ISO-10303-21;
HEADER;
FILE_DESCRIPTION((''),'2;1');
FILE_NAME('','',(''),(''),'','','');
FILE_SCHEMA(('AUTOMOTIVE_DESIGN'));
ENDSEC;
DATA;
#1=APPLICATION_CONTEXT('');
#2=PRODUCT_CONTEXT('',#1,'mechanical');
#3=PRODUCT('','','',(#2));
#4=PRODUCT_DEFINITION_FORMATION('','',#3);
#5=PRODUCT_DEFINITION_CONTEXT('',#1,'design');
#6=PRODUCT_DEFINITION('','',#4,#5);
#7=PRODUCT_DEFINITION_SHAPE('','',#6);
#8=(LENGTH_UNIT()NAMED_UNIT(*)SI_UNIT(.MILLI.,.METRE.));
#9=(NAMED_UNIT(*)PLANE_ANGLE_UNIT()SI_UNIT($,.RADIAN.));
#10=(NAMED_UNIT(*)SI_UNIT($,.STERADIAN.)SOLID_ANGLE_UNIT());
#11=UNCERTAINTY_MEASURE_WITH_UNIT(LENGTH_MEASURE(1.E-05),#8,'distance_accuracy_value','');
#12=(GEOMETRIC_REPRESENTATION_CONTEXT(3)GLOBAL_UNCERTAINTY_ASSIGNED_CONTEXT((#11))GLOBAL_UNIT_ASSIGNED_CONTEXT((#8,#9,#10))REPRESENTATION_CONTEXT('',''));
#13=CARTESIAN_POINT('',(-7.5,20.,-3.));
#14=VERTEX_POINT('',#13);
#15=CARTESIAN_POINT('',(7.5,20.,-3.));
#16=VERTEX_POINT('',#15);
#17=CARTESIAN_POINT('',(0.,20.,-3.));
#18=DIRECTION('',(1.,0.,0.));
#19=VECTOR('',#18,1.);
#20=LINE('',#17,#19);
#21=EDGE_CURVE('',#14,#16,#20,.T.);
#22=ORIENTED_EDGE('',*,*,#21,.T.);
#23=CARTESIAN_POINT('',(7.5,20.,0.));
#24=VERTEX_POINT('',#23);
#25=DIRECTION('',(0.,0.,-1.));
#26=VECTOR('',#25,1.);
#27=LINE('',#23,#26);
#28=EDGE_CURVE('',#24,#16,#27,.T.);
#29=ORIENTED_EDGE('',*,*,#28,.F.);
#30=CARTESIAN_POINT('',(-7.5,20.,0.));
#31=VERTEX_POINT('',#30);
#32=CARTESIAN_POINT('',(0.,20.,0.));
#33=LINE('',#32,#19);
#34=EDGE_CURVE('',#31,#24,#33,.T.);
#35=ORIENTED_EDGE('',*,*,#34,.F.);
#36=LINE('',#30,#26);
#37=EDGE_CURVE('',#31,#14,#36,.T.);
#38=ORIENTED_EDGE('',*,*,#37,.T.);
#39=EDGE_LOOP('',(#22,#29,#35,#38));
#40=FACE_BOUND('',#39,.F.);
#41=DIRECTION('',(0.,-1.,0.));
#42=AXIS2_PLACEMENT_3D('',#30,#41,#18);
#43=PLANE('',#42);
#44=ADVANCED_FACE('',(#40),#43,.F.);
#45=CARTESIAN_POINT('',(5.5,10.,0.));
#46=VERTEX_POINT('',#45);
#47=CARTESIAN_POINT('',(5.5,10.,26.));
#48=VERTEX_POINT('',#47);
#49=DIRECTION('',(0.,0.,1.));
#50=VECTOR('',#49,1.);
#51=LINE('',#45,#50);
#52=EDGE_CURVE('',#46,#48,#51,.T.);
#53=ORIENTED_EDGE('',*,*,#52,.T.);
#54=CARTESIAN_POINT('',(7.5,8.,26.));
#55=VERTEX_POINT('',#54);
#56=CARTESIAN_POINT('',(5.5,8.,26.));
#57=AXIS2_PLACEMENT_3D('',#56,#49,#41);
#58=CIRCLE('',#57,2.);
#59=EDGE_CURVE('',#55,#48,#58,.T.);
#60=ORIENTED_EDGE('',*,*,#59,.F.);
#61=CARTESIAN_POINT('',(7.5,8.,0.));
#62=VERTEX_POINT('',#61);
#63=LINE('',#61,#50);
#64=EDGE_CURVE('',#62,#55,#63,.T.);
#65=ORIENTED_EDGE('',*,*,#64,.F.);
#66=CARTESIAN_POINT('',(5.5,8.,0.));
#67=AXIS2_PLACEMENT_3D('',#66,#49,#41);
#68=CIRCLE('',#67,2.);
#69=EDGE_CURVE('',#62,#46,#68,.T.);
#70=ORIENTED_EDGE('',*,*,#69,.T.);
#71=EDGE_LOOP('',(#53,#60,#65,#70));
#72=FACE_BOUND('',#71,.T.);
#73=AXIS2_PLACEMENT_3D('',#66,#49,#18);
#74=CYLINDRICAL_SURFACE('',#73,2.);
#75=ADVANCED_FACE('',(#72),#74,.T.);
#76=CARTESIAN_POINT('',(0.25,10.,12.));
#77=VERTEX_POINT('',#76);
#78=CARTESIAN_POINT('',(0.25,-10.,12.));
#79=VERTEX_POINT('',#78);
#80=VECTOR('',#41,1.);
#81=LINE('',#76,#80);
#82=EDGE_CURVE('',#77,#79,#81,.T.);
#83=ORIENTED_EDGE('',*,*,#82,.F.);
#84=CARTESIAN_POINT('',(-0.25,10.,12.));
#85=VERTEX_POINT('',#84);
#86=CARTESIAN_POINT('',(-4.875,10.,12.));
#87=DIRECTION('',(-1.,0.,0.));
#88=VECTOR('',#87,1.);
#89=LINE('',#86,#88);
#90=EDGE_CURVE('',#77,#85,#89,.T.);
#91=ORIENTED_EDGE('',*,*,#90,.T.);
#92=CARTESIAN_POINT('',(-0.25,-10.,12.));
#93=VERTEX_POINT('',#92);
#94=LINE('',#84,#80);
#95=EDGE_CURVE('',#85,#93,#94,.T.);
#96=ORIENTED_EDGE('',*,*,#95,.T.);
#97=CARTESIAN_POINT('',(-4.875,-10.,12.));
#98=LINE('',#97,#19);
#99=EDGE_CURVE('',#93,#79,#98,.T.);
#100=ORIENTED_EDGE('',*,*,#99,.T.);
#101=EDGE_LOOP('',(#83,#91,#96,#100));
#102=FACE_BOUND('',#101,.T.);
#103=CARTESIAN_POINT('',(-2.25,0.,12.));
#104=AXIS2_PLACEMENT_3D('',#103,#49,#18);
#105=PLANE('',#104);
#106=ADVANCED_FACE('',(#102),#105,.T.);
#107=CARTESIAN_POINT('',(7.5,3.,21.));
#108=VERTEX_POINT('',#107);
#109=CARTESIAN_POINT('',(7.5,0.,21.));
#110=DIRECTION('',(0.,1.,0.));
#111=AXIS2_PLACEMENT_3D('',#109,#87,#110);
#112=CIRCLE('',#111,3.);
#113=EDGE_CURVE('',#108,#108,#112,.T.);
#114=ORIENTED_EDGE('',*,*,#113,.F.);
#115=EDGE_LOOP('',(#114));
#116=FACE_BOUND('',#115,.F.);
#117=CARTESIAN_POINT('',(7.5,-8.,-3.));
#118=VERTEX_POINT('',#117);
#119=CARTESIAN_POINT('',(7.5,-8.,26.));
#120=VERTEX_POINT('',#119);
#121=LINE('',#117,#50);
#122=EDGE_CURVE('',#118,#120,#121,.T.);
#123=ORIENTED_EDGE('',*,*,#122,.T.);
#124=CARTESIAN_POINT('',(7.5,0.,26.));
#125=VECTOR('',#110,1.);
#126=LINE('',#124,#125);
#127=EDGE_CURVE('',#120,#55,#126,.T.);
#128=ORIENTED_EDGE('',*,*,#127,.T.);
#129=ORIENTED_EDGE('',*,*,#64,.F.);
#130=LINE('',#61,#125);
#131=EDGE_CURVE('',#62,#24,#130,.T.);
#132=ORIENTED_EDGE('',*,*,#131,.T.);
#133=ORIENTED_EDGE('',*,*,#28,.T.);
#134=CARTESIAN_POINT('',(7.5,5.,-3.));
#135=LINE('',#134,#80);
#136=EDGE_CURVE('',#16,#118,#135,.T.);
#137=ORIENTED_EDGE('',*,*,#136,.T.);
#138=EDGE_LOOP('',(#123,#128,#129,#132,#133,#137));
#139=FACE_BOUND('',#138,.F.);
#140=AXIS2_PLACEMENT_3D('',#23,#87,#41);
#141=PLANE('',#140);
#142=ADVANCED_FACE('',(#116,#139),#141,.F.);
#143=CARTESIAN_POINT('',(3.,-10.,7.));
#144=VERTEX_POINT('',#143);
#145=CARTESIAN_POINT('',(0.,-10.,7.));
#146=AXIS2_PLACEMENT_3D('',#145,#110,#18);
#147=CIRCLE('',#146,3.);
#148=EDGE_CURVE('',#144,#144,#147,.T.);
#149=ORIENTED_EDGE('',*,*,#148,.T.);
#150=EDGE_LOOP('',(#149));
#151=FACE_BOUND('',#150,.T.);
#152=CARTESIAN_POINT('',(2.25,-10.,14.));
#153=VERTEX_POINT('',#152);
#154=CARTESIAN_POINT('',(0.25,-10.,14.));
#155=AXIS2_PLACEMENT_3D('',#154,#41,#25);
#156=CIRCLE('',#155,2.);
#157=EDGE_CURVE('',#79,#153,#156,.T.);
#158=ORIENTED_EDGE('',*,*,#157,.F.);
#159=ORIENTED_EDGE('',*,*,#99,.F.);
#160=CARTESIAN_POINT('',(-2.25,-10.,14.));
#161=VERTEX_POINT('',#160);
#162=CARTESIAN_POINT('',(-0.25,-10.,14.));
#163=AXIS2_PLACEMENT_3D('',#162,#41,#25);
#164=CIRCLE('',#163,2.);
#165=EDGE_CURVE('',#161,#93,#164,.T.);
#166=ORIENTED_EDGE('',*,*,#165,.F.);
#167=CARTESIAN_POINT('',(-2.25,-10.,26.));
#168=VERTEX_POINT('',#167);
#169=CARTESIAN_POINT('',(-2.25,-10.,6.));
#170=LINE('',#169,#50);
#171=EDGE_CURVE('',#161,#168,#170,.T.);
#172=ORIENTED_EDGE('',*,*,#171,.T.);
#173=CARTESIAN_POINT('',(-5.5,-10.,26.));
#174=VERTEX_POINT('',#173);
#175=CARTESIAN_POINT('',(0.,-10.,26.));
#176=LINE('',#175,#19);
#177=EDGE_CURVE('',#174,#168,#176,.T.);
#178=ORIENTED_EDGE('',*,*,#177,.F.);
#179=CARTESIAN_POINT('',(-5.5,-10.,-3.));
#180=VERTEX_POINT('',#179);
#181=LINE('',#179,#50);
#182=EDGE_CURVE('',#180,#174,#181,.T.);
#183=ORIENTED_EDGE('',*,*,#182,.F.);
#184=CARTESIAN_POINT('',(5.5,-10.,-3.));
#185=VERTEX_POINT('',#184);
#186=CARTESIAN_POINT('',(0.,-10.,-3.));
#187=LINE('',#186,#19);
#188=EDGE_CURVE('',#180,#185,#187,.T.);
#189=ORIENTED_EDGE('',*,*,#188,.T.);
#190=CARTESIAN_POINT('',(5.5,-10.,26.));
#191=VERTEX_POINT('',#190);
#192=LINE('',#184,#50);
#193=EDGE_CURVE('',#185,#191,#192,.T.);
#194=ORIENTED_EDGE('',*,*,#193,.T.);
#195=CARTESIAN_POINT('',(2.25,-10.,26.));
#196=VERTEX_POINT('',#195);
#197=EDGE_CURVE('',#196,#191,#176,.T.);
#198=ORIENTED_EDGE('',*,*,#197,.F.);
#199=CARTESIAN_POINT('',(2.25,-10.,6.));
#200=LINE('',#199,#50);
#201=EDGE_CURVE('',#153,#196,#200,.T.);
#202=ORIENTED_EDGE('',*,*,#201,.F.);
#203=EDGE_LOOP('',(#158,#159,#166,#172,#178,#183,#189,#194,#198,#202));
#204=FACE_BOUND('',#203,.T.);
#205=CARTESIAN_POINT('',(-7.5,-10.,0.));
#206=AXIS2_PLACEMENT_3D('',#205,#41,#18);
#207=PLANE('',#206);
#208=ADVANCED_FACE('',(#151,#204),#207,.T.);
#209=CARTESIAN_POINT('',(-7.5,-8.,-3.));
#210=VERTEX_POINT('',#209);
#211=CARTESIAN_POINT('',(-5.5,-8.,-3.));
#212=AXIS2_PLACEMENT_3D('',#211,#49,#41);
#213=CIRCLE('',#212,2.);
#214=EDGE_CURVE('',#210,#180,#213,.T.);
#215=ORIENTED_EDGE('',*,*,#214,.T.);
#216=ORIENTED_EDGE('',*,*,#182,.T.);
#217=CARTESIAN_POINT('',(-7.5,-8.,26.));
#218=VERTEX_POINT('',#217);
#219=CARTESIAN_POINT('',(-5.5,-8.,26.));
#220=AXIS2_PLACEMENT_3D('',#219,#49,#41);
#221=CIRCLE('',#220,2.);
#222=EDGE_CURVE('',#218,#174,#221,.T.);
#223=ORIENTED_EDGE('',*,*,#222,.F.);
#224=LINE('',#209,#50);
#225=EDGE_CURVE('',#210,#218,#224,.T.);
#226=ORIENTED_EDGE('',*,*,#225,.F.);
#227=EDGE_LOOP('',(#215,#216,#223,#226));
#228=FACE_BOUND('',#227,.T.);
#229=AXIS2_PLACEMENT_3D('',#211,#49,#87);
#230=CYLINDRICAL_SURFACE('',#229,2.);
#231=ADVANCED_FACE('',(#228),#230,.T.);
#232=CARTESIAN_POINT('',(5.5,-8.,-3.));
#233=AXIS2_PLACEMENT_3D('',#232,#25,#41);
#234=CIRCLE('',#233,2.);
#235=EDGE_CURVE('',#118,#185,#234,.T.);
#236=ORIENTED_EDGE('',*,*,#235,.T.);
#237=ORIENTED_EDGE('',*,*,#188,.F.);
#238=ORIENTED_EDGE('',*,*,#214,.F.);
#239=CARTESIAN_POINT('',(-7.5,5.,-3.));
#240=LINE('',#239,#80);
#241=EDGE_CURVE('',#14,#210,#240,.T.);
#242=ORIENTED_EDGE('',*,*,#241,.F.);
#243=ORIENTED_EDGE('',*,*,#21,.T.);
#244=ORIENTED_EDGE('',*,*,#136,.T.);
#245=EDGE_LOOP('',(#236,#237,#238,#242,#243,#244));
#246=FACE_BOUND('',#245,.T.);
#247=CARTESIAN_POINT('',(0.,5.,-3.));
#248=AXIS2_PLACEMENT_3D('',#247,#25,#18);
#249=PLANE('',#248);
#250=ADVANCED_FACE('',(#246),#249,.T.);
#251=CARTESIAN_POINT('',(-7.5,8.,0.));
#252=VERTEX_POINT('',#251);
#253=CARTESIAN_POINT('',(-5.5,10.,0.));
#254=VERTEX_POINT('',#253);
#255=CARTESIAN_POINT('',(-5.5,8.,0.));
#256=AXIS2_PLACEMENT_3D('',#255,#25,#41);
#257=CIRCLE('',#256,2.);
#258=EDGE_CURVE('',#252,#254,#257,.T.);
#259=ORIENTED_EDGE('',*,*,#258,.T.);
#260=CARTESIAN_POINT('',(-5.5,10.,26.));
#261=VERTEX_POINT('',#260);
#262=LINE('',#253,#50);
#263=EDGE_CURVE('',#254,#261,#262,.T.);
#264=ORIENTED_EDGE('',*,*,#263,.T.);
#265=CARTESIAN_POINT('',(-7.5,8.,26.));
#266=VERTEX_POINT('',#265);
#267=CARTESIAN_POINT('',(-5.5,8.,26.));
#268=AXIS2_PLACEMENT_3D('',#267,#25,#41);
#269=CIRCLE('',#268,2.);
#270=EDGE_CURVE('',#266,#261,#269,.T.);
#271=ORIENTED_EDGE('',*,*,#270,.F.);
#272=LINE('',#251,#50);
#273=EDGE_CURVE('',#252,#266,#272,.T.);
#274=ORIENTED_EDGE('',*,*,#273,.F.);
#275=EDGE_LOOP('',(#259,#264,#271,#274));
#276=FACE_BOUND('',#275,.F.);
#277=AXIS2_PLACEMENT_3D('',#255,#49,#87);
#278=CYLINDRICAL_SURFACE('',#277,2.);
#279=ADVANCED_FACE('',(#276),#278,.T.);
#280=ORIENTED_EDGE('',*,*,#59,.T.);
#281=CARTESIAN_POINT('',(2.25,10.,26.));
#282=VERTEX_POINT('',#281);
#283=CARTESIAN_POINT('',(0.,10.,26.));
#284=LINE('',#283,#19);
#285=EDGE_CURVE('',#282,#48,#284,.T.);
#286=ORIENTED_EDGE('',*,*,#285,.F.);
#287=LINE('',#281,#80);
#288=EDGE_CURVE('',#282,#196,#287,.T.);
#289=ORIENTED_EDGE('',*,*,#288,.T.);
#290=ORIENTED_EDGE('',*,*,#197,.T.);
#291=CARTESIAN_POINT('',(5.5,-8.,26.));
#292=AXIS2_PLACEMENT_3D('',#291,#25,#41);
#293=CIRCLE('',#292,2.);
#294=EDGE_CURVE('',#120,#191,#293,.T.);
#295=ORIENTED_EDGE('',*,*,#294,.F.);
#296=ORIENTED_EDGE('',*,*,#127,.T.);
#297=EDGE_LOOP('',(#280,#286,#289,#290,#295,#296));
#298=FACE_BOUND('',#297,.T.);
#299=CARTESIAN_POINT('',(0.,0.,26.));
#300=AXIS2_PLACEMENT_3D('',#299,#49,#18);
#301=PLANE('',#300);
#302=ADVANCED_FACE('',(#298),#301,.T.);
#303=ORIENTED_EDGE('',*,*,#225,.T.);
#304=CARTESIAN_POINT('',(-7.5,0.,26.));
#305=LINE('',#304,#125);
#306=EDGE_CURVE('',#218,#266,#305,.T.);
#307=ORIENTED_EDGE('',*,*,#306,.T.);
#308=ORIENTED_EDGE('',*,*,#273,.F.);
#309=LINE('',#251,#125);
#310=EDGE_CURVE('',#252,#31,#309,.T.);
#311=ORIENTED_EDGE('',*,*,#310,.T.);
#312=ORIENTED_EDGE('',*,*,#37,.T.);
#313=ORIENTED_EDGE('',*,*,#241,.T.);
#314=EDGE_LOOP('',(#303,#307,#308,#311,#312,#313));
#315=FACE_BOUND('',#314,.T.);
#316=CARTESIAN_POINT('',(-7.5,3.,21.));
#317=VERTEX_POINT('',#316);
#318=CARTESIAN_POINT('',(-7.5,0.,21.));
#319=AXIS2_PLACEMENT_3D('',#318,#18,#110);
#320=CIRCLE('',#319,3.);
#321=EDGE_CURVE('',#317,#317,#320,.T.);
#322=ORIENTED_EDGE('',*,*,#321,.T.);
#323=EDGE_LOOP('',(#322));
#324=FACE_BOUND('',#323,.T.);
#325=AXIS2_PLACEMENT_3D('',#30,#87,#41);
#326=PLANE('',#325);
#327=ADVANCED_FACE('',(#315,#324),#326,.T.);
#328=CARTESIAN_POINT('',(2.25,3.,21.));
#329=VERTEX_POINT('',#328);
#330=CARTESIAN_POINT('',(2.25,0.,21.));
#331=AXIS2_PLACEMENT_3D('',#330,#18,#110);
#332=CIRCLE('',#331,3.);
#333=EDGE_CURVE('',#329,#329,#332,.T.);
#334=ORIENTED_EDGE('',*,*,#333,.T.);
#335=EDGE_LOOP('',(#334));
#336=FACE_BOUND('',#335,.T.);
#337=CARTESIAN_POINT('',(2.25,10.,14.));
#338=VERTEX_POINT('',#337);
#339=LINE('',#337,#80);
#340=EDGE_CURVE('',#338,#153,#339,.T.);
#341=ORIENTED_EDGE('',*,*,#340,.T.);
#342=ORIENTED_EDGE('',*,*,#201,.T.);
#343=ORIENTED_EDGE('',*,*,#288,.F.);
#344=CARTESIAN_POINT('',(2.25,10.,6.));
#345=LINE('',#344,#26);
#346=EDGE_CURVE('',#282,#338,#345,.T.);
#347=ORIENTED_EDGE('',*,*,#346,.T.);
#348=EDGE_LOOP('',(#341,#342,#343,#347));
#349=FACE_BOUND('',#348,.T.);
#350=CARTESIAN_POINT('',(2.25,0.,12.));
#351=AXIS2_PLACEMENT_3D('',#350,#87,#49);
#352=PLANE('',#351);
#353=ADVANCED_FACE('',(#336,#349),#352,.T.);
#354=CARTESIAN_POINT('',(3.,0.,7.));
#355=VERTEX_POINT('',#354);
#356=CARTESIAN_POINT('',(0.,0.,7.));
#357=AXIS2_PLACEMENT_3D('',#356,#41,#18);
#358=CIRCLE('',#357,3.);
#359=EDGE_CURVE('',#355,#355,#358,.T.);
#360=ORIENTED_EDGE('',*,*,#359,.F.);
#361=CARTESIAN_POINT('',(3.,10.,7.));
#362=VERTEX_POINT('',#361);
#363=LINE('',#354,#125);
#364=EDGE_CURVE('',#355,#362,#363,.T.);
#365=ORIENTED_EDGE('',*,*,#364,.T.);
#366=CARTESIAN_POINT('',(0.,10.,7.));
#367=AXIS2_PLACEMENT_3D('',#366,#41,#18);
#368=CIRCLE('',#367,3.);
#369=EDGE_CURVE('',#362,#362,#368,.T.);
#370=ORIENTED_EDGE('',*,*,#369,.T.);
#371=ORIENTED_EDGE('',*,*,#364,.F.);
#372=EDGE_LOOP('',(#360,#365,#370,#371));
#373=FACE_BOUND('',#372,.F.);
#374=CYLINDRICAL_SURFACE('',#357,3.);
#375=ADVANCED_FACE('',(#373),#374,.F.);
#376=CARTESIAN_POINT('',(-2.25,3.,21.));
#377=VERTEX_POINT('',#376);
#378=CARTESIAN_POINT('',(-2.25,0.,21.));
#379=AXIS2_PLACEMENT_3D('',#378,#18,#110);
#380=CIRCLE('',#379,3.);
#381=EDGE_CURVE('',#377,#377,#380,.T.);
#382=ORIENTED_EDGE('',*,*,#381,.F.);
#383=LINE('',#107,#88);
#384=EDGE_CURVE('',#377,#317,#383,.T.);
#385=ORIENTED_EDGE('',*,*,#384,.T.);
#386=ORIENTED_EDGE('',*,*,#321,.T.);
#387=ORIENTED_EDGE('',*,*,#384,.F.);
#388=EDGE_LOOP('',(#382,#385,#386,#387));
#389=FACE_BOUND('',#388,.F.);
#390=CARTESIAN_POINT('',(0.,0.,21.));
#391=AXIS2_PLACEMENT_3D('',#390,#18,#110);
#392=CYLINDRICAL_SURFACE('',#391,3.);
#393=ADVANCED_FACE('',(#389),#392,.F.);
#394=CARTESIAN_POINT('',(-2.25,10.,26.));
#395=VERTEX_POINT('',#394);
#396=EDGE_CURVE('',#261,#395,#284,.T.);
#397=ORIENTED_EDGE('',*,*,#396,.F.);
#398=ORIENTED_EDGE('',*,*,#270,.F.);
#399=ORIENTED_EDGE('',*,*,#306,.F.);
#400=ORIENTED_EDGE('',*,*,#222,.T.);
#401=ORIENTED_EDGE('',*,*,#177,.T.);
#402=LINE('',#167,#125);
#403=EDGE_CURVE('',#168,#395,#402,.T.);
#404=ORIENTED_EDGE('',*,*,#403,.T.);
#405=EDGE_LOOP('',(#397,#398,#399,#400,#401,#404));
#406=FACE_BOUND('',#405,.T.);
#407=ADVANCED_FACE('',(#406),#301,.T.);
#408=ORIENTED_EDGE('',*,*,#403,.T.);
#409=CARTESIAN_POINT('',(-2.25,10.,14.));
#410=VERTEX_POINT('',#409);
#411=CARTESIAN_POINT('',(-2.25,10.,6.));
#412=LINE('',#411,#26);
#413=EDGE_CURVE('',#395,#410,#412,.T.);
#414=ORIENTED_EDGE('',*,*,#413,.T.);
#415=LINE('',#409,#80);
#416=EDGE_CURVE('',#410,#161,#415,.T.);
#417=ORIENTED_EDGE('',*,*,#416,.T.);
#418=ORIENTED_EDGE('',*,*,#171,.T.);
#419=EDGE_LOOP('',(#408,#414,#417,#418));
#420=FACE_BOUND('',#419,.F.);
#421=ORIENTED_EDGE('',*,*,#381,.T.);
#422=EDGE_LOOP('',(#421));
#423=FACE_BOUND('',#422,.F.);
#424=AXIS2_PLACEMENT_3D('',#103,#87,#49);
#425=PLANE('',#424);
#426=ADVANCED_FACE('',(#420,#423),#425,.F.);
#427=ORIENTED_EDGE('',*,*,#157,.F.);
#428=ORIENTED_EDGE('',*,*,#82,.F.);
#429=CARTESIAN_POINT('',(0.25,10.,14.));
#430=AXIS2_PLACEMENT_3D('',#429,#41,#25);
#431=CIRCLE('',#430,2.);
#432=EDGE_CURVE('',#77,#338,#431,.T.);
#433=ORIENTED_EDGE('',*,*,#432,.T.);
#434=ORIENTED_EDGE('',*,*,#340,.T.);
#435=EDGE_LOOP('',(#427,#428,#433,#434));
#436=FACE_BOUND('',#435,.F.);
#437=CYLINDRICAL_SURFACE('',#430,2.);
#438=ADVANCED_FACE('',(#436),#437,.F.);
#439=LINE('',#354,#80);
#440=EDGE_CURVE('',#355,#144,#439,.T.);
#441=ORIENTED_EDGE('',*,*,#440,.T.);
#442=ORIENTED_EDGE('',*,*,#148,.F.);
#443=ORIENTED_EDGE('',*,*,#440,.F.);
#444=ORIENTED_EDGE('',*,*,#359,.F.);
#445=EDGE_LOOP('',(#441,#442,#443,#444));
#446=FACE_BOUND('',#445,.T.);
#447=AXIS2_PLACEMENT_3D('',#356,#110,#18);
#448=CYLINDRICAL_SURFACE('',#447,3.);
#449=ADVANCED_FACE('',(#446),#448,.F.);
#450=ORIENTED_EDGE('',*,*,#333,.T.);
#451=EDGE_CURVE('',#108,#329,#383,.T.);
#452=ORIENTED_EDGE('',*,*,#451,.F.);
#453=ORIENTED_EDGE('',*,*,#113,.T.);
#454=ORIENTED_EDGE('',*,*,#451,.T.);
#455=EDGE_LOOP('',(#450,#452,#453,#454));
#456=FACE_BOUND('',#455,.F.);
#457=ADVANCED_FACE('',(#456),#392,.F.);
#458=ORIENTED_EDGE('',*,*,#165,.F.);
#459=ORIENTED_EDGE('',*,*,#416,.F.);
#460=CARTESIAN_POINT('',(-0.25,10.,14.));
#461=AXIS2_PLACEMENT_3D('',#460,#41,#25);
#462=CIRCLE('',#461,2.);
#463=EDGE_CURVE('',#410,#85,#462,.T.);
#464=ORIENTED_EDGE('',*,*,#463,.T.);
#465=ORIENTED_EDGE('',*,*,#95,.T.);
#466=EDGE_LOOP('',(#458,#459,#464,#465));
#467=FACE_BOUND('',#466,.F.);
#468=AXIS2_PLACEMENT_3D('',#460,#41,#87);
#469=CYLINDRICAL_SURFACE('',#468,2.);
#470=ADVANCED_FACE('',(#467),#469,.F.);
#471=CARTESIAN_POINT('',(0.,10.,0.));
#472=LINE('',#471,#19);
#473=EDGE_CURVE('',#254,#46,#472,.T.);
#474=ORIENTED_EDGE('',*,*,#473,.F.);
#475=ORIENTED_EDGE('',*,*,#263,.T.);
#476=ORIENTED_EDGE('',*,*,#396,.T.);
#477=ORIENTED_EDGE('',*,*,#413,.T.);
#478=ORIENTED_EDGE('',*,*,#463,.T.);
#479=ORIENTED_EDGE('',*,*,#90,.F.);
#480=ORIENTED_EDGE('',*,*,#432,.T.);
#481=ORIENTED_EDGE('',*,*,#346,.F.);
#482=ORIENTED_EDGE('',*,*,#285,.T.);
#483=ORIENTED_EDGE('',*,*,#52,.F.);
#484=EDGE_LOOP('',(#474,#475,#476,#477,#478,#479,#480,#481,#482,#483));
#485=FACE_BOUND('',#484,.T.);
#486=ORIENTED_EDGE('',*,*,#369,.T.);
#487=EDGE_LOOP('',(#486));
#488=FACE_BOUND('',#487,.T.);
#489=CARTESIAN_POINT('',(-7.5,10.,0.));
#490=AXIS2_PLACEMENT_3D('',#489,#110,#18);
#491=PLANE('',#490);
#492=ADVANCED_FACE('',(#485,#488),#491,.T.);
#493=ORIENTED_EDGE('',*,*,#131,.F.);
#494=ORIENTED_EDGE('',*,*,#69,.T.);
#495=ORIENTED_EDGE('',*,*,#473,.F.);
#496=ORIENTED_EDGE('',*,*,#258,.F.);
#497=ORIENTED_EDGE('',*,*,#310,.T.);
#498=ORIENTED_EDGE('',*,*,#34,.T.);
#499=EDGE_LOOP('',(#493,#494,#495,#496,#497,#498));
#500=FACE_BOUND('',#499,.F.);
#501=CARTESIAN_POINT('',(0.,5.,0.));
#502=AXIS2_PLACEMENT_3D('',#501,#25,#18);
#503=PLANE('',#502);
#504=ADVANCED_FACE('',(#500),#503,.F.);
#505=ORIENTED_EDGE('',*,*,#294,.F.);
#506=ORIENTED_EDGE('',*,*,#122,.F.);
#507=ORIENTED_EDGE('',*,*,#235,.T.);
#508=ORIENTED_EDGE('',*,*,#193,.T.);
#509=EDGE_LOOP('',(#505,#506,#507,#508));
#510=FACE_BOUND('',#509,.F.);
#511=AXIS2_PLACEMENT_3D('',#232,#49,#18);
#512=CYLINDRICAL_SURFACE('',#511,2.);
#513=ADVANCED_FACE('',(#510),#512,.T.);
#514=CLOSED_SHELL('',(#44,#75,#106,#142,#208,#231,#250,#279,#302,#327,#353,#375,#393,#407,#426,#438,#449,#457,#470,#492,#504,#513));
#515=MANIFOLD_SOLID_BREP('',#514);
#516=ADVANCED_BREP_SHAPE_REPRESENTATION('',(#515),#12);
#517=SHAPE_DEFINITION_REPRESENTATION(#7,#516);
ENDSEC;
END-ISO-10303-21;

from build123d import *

# Parameters (mm, degrees)
F0_W          = 15
F0_H          = 20
F1_DEPTH      = 26
F2_R          = 3
F3_DEPTH      = 10.001
F3_DEPTH_BACK = 10.001
F4_R          = 3
F5_DEPTH      = 7.501
F5_DEPTH_BACK = 7.501
F6_W          = 4.5
F6_H          = 14
F7_DEPTH      = 10.001
F7_DEPTH_BACK = 10.001
F8_W          = 15
F8_H          = 30
F9_DEPTH      = 3
F10_R         = 2


# Not quite as in the source:
# - two fillets or chamfers of one size are made in one step
# - a feature names something its author has since deleted; it is built from what else it names


with BuildPart() as f1:
    # F0 (on Top) → F1 (new body)
    with BuildSketch(Plane.XY):
        Rectangle(F0_W, F0_H)
    extrude(amount=F1_DEPTH)

    # F2 (on Front) → F3 (cut, two sides)
    with BuildSketch(Plane.XZ) as f3_sk:
        with Locations((0, 7)):
            Circle(F2_R)
    extrude(amount=-F3_DEPTH, mode=Mode.SUBTRACT)
    extrude(f3_sk.sketch, amount=F3_DEPTH_BACK, mode=Mode.SUBTRACT)

    # F4 (on Right) → F5 (cut, two sides)
    with BuildSketch(Plane.YZ) as f5_sk:
        with Locations((0, 21)):
            Circle(F4_R)
    extrude(amount=-F5_DEPTH, mode=Mode.SUBTRACT)
    extrude(f5_sk.sketch, amount=F5_DEPTH_BACK, mode=Mode.SUBTRACT)

    # F6 (on Front) → F7 (cut, two sides)
    with BuildSketch(Plane.XZ) as f7_sk:
        with Locations((0, 19)):
            Rectangle(F6_W, F6_H)
    extrude(amount=-F7_DEPTH, mode=Mode.SUBTRACT)
    extrude(f7_sk.sketch, amount=F7_DEPTH_BACK, mode=Mode.SUBTRACT)

    # F8 (on face) → F9 (join)
    with BuildSketch(Plane(origin=(0, 0, 0), x_dir=(1, 0, 0), z_dir=(0, 0, -1))):
        with Locations((0, -5)):
            Rectangle(F8_W, F8_H)
    extrude(amount=F9_DEPTH)

    # F10
    f10_edges = [f1.edges().sort_by_distance(p)[0] for p in [
        (7.5, -10, 11.5),
        (-7.5, -10, 11.5),
        (-7.5, 10, 13),
        (7.5, 10, 13),
        (2.25, 0, 12),
        (-2.25, 0, 12),
    ]]
    fillet(f10_edges, radius=F10_R)


solid = f1.part
